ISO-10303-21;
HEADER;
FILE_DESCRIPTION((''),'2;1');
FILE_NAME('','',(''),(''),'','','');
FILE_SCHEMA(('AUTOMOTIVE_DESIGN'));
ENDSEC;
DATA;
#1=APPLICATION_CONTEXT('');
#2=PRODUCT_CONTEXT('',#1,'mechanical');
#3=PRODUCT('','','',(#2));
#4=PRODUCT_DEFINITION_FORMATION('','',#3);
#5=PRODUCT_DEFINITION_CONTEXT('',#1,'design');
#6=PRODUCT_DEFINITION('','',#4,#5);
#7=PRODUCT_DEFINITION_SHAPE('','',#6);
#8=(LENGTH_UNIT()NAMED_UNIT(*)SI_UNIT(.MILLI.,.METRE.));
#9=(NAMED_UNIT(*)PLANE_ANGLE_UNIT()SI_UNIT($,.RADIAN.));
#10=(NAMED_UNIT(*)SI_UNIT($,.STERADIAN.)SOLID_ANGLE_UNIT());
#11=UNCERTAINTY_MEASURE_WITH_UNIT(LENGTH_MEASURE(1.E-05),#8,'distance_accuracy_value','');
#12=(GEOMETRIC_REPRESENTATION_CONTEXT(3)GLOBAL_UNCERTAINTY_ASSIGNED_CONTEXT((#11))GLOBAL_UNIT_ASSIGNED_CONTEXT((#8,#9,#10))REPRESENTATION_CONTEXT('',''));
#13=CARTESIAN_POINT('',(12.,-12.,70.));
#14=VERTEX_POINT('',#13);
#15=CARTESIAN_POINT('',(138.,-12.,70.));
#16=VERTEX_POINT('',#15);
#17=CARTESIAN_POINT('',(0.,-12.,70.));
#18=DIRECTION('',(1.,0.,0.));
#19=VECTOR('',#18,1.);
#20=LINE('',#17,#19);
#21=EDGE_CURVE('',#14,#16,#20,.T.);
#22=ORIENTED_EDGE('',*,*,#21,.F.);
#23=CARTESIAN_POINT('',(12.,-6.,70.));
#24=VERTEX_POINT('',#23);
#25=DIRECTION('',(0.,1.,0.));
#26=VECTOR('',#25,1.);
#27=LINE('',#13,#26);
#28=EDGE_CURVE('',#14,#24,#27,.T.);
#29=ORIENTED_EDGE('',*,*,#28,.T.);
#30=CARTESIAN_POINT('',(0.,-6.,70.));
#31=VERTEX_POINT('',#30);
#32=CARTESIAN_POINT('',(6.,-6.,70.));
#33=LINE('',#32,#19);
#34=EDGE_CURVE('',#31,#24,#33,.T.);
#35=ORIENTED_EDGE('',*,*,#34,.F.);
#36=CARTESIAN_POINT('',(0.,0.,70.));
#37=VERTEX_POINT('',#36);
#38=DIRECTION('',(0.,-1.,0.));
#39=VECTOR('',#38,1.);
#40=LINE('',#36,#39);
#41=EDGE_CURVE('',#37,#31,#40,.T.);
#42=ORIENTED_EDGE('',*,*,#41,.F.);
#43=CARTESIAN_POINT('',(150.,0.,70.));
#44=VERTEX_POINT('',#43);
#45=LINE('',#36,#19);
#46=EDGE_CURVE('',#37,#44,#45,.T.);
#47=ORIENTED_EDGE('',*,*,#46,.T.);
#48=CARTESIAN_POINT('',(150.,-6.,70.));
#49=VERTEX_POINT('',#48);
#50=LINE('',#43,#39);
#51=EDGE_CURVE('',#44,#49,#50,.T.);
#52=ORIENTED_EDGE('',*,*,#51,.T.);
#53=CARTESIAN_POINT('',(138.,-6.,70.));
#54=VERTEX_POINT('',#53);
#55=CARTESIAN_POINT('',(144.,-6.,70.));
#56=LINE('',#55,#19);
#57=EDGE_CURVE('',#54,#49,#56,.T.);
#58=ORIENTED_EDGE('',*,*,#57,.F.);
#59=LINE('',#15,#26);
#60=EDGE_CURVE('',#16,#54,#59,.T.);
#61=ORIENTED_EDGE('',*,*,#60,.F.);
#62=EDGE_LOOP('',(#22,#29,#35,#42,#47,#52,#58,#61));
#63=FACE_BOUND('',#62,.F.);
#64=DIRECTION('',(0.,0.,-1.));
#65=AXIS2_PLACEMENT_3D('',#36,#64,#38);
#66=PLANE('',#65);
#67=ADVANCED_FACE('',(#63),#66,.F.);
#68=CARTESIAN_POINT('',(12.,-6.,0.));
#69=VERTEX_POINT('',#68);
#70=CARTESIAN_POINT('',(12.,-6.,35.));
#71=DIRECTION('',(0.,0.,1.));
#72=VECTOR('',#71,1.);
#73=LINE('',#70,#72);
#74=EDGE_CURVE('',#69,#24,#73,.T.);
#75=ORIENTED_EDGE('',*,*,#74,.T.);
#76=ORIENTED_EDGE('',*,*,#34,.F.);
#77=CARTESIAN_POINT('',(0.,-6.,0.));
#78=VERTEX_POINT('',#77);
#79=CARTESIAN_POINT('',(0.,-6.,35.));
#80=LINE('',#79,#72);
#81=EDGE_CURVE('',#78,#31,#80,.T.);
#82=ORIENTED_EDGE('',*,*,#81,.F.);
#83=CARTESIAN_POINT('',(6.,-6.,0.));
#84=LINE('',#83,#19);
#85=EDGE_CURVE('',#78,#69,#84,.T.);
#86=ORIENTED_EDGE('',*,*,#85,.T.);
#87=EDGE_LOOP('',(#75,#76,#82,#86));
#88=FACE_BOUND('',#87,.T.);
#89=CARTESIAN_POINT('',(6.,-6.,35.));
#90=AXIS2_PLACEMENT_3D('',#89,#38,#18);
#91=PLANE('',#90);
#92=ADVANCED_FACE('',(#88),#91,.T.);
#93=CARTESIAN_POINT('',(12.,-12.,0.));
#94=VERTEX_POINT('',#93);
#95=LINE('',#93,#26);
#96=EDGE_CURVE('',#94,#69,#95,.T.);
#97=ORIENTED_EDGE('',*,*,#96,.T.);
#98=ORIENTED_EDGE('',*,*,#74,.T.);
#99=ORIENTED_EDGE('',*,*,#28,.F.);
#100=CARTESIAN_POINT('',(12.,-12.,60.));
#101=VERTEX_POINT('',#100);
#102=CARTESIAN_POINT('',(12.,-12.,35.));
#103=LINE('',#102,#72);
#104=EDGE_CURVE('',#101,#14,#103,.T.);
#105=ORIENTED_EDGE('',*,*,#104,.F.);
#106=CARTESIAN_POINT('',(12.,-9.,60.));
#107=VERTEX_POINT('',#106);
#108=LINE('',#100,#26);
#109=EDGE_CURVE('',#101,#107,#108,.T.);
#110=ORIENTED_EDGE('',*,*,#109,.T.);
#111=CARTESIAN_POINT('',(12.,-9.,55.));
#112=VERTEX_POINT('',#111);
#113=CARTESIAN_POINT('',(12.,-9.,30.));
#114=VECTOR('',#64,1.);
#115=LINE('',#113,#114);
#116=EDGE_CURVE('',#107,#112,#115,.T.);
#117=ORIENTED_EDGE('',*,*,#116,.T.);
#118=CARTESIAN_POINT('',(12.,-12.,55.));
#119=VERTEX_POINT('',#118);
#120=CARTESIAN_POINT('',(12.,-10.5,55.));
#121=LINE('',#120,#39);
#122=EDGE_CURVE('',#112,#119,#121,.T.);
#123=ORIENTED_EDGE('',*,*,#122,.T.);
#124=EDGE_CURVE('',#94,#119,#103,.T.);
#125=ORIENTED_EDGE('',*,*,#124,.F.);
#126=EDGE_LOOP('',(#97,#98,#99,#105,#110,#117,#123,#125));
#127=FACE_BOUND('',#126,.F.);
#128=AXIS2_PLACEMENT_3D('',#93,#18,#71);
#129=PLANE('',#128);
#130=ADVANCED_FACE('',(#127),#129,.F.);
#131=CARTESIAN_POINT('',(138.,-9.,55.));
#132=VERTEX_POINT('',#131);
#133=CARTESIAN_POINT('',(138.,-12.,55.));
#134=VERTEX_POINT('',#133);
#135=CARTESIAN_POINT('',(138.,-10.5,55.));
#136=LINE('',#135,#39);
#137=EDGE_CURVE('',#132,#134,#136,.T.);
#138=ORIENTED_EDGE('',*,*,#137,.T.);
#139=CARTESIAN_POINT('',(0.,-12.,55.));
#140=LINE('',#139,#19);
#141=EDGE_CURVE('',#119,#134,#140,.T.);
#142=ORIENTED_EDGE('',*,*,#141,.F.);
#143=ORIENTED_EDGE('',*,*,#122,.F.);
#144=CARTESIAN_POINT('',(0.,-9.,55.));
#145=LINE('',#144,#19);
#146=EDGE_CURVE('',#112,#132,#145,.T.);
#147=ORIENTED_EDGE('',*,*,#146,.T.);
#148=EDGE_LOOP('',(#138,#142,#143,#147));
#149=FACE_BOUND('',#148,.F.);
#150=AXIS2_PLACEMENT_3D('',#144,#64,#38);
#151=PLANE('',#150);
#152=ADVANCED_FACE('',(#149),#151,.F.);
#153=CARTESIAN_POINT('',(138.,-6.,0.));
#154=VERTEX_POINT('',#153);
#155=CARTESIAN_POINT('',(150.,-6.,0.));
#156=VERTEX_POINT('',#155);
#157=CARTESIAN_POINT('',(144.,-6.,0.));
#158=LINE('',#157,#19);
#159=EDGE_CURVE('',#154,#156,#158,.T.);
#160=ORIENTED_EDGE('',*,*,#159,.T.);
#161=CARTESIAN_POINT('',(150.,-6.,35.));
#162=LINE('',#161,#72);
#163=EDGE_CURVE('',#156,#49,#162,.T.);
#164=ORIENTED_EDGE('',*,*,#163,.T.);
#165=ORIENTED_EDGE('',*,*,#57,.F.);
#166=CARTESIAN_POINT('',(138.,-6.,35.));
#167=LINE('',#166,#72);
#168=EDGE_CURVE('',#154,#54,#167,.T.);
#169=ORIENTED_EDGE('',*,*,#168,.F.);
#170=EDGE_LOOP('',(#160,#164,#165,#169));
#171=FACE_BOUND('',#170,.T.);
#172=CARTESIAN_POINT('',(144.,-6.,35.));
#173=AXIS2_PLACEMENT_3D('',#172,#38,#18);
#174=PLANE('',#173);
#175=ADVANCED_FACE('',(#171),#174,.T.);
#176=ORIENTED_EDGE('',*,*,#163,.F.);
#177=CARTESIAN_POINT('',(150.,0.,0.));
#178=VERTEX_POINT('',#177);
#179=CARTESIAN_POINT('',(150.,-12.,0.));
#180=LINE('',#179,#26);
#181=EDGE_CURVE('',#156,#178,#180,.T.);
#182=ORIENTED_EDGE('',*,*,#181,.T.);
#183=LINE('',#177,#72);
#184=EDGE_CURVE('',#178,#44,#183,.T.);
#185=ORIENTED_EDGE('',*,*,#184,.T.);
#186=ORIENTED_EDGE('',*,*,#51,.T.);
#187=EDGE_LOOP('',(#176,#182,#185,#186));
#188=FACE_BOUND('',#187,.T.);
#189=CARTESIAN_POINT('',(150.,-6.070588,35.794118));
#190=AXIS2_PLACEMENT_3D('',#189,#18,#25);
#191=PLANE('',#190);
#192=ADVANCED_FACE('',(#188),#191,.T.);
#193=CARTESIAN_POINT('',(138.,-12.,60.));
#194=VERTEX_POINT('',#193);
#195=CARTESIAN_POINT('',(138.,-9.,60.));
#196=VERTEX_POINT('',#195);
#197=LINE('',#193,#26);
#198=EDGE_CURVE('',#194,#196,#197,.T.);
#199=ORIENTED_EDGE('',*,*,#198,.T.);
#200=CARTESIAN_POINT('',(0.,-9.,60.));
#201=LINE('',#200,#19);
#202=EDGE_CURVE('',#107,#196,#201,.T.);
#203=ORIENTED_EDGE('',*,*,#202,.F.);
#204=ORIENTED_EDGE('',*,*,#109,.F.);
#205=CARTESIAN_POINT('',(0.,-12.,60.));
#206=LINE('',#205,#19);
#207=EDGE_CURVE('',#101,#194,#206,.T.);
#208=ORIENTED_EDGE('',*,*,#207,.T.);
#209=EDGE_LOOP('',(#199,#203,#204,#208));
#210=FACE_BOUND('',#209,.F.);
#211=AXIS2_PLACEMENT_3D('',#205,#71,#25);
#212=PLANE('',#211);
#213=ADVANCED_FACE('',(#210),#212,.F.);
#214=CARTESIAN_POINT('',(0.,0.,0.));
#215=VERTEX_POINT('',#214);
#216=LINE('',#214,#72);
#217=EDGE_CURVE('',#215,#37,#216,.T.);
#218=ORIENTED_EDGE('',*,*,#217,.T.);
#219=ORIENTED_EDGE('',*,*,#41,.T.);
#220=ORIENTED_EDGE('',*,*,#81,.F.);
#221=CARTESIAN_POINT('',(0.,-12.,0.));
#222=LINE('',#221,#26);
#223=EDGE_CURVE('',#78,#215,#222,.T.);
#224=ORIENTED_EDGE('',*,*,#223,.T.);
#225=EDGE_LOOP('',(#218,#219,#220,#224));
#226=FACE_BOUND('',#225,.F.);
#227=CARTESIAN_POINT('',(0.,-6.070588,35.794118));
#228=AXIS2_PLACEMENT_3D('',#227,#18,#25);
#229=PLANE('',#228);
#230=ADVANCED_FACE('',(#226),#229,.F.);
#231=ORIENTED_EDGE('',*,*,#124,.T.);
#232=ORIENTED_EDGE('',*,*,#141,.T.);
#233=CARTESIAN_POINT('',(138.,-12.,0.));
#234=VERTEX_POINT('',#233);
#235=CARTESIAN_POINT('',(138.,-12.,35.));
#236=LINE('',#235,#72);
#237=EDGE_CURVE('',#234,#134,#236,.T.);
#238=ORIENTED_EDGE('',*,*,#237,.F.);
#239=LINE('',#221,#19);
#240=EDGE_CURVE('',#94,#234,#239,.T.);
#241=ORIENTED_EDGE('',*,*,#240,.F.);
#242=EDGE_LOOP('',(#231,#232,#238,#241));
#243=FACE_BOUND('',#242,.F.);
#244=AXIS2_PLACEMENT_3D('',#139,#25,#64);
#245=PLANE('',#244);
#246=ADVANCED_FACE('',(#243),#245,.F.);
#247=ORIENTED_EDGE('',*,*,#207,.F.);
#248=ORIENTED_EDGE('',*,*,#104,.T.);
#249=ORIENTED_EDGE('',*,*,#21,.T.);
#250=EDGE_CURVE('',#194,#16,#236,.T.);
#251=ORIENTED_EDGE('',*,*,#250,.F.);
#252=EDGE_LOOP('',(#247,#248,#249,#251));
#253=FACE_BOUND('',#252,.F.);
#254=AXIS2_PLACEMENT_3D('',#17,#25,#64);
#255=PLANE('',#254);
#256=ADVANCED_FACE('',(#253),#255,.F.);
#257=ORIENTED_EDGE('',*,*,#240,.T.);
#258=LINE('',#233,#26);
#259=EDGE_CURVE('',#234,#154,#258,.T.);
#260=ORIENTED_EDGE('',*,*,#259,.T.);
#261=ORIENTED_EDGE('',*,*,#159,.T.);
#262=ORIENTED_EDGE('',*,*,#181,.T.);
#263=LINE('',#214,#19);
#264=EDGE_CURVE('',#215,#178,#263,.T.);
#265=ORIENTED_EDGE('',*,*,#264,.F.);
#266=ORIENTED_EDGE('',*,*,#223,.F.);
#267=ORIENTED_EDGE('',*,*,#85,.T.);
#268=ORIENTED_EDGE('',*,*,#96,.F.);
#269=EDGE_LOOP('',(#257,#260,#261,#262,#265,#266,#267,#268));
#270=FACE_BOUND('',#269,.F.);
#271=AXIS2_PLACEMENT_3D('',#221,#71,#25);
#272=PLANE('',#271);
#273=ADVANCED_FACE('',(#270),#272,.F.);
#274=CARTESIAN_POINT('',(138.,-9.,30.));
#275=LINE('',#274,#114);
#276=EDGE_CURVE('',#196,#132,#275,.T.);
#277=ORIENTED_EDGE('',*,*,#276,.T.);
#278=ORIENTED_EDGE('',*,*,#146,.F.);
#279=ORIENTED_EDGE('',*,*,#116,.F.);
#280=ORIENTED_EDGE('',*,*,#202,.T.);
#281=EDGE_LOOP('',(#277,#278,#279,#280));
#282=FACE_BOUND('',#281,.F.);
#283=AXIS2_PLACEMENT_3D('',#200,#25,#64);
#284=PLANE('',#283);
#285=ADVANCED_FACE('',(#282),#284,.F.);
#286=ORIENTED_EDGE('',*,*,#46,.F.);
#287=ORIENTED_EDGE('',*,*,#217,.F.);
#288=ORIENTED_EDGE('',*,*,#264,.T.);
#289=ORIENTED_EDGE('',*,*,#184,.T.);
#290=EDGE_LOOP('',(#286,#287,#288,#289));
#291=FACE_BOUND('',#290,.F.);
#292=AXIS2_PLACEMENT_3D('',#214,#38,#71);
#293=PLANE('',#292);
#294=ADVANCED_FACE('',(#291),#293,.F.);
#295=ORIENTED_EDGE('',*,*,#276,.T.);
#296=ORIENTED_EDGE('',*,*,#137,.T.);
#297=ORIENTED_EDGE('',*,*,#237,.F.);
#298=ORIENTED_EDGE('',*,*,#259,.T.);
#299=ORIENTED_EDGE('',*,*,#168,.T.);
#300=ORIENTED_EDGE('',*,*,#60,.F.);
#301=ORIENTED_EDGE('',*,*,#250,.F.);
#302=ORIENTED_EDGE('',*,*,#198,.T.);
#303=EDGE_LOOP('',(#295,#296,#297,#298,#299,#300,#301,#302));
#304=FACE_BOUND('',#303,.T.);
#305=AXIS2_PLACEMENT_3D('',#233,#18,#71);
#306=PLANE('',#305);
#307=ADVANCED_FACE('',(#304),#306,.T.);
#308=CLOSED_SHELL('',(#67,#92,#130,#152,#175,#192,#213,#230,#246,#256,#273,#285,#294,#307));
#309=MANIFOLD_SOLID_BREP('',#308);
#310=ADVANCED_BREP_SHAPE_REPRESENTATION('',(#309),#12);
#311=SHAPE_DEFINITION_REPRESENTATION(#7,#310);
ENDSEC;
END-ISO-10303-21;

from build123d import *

# Parameters (mm, degrees)
F1_DEPTH = 150
F2_W     = 12
F2_H     = 70
F3_DEPTH = 6


# Not quite as in the source:
# - a feature names something its author has since deleted; it is built from what else it names


with BuildPart() as f1:
    # F0 (on Right) → F1 (new body)
    with BuildSketch(Plane.YZ):
        Polygon((-12, 0), (0, 0), (0, 70), (-12, 70), (-12, 60), (-9, 60), (-9, 55), (-12, 55), align=None)
    extrude(amount=F1_DEPTH)

    # F2 (on face) → F3 (cut)
    with BuildSketch(Plane.XZ.offset(12)):
        with Locations((144, 35)):
            Rectangle(F2_W, F2_H)
        with Locations((6, 35)):
            Rectangle(F2_W, F2_H)
    extrude(amount=-F3_DEPTH, mode=Mode.SUBTRACT)


solid = f1.part
